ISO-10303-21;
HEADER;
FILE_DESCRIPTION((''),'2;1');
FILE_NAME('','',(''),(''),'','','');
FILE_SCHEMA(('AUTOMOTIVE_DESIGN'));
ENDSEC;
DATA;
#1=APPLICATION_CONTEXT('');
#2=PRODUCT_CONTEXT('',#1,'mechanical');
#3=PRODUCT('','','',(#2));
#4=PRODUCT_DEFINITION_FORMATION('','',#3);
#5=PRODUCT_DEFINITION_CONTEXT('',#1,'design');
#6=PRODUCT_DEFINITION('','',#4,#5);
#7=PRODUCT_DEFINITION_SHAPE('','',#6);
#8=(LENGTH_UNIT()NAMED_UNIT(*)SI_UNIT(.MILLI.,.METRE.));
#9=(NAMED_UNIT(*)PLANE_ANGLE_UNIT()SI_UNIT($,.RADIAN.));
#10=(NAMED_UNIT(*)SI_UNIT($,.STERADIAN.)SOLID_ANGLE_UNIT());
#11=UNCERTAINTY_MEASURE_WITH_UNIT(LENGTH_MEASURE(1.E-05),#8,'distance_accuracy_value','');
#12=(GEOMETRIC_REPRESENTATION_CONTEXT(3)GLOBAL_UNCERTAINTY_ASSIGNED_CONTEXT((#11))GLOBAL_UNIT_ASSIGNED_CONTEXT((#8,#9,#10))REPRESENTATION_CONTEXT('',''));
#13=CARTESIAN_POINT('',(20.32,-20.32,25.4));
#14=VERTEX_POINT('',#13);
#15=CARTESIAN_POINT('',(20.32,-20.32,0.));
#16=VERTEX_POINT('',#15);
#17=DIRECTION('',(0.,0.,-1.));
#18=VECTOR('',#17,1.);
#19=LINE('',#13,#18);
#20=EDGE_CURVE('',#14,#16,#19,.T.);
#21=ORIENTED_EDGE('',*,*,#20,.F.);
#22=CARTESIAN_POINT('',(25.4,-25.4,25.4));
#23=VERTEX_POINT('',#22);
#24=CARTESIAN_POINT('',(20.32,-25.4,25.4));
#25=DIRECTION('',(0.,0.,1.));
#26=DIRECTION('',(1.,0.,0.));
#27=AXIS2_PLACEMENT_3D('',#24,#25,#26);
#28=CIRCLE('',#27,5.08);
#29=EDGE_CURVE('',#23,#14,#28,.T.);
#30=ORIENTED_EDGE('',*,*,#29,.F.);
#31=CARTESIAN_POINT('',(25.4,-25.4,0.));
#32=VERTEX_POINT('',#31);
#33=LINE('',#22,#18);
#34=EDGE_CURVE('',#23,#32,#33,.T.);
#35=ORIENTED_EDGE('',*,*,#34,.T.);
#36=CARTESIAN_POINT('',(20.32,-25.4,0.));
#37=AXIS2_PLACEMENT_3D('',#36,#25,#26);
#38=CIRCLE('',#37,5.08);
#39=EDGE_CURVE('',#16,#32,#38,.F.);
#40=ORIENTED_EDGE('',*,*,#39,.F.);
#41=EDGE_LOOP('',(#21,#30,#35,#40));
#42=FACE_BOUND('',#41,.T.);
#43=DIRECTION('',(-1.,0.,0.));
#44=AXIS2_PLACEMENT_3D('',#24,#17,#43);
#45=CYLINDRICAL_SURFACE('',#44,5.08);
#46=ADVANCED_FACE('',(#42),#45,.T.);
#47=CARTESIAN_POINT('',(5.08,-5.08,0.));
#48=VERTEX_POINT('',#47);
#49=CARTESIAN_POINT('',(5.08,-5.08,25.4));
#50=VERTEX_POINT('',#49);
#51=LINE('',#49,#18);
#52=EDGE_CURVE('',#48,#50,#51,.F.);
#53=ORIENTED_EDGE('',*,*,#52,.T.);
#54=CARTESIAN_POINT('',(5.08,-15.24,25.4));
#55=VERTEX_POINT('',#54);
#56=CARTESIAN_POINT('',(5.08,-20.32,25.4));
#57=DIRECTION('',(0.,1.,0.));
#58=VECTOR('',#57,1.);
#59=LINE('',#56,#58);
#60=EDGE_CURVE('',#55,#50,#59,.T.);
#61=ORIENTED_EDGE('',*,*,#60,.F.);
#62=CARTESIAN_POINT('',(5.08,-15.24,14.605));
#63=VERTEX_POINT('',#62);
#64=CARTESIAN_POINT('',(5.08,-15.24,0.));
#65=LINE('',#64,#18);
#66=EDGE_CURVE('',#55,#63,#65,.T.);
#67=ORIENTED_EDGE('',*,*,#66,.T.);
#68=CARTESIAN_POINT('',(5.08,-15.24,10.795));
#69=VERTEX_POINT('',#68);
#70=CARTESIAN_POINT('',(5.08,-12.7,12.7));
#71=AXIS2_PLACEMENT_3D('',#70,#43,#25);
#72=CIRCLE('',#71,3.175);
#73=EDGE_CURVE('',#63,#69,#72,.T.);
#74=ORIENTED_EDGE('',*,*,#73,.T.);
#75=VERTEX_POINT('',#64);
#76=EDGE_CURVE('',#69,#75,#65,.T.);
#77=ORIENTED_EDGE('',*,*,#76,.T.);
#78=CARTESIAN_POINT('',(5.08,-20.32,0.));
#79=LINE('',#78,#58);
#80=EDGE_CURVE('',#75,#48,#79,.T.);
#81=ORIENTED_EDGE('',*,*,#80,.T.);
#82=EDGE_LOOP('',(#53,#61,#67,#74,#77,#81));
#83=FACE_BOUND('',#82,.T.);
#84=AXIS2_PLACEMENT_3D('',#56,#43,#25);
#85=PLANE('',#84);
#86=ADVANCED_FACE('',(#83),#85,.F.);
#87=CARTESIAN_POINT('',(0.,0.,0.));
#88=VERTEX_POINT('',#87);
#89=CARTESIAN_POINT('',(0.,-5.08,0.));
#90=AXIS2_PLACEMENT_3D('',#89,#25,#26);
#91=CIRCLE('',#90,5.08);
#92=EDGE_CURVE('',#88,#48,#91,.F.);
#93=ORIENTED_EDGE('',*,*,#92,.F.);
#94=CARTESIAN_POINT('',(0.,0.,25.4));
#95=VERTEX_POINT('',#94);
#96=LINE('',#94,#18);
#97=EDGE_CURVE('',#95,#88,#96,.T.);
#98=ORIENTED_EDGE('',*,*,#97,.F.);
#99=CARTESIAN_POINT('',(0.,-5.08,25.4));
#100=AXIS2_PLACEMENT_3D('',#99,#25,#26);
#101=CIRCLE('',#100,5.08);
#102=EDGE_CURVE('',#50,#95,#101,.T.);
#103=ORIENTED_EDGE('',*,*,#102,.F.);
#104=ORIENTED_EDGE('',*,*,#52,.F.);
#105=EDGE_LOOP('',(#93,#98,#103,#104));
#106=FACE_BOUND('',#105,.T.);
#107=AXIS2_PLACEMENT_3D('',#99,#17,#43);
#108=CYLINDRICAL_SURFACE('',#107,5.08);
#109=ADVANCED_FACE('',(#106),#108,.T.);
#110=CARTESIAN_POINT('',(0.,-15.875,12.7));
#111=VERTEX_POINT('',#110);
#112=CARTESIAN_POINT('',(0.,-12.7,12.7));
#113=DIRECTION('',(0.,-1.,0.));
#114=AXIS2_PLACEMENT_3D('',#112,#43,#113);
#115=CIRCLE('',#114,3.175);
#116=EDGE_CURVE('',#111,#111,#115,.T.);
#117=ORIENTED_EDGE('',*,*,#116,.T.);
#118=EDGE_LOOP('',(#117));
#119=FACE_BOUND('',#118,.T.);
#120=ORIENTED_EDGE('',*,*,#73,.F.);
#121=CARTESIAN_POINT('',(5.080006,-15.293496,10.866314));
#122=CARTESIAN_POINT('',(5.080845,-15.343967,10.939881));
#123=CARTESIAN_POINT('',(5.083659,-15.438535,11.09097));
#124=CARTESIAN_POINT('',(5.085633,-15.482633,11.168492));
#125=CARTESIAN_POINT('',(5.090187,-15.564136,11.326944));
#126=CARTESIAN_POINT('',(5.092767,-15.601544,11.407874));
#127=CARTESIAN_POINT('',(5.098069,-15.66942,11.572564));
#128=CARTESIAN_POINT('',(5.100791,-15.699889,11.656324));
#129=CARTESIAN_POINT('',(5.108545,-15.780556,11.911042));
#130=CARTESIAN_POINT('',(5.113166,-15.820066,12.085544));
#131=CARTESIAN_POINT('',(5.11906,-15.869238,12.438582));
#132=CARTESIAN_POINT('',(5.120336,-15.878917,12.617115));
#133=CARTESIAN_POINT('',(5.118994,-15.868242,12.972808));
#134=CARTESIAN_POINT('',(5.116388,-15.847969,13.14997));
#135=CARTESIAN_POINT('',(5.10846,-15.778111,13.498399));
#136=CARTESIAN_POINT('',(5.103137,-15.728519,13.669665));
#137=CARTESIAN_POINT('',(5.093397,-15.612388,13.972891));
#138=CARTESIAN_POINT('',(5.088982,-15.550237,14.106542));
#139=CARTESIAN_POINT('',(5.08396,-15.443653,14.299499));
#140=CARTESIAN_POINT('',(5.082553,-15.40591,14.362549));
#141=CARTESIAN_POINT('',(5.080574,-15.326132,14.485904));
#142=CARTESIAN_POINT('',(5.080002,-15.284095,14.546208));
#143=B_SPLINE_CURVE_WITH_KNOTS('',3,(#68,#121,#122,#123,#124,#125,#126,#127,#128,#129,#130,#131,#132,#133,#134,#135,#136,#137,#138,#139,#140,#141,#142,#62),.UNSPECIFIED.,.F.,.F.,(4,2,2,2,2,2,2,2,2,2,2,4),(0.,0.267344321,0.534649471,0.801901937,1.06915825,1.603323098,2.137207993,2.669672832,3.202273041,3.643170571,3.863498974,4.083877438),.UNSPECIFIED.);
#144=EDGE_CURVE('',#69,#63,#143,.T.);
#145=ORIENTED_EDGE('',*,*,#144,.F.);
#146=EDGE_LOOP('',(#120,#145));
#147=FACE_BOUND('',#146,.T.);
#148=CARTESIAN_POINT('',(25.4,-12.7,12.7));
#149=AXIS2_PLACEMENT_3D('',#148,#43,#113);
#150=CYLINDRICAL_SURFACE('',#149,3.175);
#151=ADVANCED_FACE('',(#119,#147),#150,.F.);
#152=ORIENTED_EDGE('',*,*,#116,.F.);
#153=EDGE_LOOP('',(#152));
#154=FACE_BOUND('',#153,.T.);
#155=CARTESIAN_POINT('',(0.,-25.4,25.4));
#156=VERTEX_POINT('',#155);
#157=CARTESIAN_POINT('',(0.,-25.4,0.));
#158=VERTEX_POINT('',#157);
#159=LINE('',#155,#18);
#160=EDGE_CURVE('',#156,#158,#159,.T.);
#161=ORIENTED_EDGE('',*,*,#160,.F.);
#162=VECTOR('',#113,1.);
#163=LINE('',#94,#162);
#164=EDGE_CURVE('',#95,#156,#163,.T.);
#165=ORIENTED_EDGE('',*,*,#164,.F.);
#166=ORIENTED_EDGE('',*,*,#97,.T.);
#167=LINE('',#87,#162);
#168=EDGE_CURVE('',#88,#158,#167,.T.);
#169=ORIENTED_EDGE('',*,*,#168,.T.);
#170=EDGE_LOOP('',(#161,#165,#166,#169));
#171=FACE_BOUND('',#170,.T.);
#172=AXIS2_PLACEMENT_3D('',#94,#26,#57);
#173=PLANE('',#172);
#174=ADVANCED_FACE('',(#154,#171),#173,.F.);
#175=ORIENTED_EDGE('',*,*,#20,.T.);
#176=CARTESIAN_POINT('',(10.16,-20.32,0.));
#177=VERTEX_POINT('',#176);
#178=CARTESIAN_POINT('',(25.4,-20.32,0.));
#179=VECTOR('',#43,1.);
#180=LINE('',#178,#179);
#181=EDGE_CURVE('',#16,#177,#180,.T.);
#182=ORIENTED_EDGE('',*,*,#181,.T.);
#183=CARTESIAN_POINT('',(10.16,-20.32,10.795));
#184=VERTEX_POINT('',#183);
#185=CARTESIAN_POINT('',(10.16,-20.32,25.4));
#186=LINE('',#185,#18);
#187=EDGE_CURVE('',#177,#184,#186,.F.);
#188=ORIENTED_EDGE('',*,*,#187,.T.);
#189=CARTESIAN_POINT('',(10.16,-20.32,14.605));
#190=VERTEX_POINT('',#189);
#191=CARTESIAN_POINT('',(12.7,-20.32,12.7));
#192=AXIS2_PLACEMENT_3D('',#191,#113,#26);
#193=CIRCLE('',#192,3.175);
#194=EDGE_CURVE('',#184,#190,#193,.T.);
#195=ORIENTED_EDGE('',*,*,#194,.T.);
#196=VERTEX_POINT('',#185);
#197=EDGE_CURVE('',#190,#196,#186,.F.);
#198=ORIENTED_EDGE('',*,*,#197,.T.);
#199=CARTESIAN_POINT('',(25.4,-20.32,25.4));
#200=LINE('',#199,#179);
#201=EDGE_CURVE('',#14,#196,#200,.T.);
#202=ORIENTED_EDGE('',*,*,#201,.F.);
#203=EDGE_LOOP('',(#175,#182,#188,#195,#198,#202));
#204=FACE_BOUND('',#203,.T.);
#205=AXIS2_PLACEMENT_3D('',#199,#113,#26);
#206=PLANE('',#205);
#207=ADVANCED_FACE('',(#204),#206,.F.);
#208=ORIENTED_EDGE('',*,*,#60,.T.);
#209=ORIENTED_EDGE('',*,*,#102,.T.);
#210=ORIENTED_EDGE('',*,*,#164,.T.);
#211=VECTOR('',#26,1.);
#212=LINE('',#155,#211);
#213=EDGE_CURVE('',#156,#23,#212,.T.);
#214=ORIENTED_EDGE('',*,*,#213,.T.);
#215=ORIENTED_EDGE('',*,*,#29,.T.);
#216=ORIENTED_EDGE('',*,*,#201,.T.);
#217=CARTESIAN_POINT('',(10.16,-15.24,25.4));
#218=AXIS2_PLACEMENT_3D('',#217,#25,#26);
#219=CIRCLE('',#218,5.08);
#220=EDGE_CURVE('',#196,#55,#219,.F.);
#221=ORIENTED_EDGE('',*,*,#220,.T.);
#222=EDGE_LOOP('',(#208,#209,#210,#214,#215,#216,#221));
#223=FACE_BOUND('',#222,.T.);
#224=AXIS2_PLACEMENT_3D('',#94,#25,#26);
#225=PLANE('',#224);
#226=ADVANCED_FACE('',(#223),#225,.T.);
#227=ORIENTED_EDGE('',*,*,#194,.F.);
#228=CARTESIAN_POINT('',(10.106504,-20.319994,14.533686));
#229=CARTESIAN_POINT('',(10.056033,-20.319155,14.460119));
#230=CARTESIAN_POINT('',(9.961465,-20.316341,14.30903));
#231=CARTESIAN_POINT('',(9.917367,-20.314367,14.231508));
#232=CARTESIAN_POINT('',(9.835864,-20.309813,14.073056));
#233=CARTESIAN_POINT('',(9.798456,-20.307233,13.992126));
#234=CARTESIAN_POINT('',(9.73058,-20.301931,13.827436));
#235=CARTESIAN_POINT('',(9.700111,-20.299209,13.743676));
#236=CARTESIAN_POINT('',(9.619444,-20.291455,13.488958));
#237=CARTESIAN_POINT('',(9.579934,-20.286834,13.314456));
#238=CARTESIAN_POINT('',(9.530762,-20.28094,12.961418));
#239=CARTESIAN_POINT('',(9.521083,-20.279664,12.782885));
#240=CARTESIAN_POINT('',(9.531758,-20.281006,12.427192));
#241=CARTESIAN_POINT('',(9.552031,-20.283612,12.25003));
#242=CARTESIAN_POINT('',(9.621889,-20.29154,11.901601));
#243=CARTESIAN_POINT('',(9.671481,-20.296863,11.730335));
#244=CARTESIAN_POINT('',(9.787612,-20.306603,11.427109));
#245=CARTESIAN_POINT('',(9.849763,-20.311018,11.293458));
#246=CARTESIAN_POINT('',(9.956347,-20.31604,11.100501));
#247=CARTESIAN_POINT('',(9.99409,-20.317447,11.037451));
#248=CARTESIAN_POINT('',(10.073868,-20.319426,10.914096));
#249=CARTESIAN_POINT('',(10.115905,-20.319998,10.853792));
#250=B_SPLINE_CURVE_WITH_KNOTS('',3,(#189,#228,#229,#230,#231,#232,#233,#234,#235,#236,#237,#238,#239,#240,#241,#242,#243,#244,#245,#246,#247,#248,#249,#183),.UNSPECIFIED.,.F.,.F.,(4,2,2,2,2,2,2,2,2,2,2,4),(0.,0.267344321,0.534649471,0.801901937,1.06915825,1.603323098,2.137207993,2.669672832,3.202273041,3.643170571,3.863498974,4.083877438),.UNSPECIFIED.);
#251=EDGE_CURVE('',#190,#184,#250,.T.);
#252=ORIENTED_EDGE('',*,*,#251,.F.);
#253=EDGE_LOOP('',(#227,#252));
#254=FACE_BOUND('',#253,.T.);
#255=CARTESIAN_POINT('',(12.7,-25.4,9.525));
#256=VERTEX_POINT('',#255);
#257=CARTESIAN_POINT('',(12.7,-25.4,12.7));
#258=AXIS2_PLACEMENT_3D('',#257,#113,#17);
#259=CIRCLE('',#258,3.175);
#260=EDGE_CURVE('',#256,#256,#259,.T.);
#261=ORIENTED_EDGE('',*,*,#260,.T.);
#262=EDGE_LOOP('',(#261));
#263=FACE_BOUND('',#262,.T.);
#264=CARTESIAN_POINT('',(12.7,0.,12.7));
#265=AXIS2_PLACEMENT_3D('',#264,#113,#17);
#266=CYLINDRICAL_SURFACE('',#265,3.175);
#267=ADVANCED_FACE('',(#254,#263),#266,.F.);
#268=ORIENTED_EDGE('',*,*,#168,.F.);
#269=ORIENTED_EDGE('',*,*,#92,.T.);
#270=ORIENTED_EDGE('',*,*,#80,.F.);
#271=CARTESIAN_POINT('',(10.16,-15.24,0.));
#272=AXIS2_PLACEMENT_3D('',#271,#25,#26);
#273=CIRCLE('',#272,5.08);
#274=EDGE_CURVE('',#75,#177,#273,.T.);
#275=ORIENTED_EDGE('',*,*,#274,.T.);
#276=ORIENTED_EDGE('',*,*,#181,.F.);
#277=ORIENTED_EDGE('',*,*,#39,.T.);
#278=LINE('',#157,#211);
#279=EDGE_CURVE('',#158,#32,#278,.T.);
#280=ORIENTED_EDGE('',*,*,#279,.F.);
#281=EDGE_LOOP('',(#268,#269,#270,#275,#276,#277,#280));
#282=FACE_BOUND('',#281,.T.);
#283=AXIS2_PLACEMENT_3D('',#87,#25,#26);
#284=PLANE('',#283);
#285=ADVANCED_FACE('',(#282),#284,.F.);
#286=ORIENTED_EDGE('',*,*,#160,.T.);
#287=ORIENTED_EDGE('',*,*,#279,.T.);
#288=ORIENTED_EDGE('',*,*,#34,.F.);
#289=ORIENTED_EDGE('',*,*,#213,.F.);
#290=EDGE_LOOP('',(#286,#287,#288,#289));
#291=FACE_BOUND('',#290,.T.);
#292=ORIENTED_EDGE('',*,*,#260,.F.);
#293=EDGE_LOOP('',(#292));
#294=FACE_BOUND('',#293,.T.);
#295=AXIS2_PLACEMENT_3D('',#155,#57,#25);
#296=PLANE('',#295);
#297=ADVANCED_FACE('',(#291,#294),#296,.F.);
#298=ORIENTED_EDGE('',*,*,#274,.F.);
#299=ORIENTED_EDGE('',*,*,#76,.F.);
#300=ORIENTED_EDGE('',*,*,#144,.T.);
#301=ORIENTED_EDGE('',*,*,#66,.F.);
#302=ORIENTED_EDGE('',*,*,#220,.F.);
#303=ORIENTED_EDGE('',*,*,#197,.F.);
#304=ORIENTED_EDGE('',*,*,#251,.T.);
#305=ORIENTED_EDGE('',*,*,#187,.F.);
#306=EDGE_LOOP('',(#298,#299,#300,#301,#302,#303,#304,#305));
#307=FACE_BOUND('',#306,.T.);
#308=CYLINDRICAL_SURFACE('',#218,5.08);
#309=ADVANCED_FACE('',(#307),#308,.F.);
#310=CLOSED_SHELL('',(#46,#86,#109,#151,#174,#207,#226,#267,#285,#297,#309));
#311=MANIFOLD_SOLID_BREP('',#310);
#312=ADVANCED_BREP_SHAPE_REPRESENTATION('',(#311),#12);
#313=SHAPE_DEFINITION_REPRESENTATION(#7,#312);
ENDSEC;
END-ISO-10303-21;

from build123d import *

# Parameters (mm, degrees)
BOSS_EXTRUDE1_DEPTH = 25.4
FILLET1_R           = 5.08
CUT_EXTRUDE1_DEPTH  = 25.4
CUT_EXTRUDE2_DEPTH  = 25.4


with BuildPart() as part:
    # Sketch1 → Boss-Extrude1 (new body)
    with BuildSketch(Plane.XY):
        Polygon((0, 0), (0, -25.4), (25.4, -25.4), (25.4, -20.32), (5.08, -20.32), (5.08, 0), align=None)
    extrude(amount=BOSS_EXTRUDE1_DEPTH)

    # Fillet1
    fillet1_edges = [part.edges().sort_by_distance(p)[0] for p in [
        (5.08, -20.32, 12.7),
        (5.08, 0, 12.7),
        (25.4, -20.32, 12.7),
    ]]
    fillet(fillet1_edges, radius=FILLET1_R - 0.0001)  # a hair under: the kernel refuses the full size

    # Sketch2 → Cut-Extrude1 (cut)
    with BuildSketch(Plane.XZ.offset(25.4)):
        with BuildLine():
            ThreePointArc((15.875, 12.7), (13.915019898, 15.633317516), (10.45493597, 14.94506403))
            Line((10.45493597, 14.94506403), (14.94506403, 10.45493597))
            ThreePointArc((14.94506403, 10.45493597), (15.633317516, 11.484980102), (15.875, 12.7))
        make_face()
        with BuildLine():
            Line((14.94506403, 10.45493597), (10.45493597, 14.94506403))
            ThreePointArc((10.45493597, 14.94506403), (10.45493597, 10.45493597), (14.94506403, 10.45493597))
        make_face()
    extrude(amount=-CUT_EXTRUDE1_DEPTH, mode=Mode.SUBTRACT)

    # Sketch3 → Cut-Extrude2 (cut)
    with BuildSketch(Plane.ZY):
        with BuildLine():
            ThreePointArc((10.45493597, -10.45493597), (10.45493597, -14.94506403), (14.94506403, -14.94506403))
            Line((14.94506403, -14.94506403), (10.45493597, -10.45493597))
        make_face()
        with BuildLine():
            Line((10.45493597, -10.45493597), (14.94506403, -14.94506403))
            ThreePointArc((14.94506403, -14.94506403), (15.633317516, -13.915019898), (15.875, -12.7))
            ThreePointArc((15.875, -12.7), (13.915019898, -9.766682484), (10.45493597, -10.45493597))
        make_face()
    extrude(amount=-CUT_EXTRUDE2_DEPTH, mode=Mode.SUBTRACT)


solid = part.part
